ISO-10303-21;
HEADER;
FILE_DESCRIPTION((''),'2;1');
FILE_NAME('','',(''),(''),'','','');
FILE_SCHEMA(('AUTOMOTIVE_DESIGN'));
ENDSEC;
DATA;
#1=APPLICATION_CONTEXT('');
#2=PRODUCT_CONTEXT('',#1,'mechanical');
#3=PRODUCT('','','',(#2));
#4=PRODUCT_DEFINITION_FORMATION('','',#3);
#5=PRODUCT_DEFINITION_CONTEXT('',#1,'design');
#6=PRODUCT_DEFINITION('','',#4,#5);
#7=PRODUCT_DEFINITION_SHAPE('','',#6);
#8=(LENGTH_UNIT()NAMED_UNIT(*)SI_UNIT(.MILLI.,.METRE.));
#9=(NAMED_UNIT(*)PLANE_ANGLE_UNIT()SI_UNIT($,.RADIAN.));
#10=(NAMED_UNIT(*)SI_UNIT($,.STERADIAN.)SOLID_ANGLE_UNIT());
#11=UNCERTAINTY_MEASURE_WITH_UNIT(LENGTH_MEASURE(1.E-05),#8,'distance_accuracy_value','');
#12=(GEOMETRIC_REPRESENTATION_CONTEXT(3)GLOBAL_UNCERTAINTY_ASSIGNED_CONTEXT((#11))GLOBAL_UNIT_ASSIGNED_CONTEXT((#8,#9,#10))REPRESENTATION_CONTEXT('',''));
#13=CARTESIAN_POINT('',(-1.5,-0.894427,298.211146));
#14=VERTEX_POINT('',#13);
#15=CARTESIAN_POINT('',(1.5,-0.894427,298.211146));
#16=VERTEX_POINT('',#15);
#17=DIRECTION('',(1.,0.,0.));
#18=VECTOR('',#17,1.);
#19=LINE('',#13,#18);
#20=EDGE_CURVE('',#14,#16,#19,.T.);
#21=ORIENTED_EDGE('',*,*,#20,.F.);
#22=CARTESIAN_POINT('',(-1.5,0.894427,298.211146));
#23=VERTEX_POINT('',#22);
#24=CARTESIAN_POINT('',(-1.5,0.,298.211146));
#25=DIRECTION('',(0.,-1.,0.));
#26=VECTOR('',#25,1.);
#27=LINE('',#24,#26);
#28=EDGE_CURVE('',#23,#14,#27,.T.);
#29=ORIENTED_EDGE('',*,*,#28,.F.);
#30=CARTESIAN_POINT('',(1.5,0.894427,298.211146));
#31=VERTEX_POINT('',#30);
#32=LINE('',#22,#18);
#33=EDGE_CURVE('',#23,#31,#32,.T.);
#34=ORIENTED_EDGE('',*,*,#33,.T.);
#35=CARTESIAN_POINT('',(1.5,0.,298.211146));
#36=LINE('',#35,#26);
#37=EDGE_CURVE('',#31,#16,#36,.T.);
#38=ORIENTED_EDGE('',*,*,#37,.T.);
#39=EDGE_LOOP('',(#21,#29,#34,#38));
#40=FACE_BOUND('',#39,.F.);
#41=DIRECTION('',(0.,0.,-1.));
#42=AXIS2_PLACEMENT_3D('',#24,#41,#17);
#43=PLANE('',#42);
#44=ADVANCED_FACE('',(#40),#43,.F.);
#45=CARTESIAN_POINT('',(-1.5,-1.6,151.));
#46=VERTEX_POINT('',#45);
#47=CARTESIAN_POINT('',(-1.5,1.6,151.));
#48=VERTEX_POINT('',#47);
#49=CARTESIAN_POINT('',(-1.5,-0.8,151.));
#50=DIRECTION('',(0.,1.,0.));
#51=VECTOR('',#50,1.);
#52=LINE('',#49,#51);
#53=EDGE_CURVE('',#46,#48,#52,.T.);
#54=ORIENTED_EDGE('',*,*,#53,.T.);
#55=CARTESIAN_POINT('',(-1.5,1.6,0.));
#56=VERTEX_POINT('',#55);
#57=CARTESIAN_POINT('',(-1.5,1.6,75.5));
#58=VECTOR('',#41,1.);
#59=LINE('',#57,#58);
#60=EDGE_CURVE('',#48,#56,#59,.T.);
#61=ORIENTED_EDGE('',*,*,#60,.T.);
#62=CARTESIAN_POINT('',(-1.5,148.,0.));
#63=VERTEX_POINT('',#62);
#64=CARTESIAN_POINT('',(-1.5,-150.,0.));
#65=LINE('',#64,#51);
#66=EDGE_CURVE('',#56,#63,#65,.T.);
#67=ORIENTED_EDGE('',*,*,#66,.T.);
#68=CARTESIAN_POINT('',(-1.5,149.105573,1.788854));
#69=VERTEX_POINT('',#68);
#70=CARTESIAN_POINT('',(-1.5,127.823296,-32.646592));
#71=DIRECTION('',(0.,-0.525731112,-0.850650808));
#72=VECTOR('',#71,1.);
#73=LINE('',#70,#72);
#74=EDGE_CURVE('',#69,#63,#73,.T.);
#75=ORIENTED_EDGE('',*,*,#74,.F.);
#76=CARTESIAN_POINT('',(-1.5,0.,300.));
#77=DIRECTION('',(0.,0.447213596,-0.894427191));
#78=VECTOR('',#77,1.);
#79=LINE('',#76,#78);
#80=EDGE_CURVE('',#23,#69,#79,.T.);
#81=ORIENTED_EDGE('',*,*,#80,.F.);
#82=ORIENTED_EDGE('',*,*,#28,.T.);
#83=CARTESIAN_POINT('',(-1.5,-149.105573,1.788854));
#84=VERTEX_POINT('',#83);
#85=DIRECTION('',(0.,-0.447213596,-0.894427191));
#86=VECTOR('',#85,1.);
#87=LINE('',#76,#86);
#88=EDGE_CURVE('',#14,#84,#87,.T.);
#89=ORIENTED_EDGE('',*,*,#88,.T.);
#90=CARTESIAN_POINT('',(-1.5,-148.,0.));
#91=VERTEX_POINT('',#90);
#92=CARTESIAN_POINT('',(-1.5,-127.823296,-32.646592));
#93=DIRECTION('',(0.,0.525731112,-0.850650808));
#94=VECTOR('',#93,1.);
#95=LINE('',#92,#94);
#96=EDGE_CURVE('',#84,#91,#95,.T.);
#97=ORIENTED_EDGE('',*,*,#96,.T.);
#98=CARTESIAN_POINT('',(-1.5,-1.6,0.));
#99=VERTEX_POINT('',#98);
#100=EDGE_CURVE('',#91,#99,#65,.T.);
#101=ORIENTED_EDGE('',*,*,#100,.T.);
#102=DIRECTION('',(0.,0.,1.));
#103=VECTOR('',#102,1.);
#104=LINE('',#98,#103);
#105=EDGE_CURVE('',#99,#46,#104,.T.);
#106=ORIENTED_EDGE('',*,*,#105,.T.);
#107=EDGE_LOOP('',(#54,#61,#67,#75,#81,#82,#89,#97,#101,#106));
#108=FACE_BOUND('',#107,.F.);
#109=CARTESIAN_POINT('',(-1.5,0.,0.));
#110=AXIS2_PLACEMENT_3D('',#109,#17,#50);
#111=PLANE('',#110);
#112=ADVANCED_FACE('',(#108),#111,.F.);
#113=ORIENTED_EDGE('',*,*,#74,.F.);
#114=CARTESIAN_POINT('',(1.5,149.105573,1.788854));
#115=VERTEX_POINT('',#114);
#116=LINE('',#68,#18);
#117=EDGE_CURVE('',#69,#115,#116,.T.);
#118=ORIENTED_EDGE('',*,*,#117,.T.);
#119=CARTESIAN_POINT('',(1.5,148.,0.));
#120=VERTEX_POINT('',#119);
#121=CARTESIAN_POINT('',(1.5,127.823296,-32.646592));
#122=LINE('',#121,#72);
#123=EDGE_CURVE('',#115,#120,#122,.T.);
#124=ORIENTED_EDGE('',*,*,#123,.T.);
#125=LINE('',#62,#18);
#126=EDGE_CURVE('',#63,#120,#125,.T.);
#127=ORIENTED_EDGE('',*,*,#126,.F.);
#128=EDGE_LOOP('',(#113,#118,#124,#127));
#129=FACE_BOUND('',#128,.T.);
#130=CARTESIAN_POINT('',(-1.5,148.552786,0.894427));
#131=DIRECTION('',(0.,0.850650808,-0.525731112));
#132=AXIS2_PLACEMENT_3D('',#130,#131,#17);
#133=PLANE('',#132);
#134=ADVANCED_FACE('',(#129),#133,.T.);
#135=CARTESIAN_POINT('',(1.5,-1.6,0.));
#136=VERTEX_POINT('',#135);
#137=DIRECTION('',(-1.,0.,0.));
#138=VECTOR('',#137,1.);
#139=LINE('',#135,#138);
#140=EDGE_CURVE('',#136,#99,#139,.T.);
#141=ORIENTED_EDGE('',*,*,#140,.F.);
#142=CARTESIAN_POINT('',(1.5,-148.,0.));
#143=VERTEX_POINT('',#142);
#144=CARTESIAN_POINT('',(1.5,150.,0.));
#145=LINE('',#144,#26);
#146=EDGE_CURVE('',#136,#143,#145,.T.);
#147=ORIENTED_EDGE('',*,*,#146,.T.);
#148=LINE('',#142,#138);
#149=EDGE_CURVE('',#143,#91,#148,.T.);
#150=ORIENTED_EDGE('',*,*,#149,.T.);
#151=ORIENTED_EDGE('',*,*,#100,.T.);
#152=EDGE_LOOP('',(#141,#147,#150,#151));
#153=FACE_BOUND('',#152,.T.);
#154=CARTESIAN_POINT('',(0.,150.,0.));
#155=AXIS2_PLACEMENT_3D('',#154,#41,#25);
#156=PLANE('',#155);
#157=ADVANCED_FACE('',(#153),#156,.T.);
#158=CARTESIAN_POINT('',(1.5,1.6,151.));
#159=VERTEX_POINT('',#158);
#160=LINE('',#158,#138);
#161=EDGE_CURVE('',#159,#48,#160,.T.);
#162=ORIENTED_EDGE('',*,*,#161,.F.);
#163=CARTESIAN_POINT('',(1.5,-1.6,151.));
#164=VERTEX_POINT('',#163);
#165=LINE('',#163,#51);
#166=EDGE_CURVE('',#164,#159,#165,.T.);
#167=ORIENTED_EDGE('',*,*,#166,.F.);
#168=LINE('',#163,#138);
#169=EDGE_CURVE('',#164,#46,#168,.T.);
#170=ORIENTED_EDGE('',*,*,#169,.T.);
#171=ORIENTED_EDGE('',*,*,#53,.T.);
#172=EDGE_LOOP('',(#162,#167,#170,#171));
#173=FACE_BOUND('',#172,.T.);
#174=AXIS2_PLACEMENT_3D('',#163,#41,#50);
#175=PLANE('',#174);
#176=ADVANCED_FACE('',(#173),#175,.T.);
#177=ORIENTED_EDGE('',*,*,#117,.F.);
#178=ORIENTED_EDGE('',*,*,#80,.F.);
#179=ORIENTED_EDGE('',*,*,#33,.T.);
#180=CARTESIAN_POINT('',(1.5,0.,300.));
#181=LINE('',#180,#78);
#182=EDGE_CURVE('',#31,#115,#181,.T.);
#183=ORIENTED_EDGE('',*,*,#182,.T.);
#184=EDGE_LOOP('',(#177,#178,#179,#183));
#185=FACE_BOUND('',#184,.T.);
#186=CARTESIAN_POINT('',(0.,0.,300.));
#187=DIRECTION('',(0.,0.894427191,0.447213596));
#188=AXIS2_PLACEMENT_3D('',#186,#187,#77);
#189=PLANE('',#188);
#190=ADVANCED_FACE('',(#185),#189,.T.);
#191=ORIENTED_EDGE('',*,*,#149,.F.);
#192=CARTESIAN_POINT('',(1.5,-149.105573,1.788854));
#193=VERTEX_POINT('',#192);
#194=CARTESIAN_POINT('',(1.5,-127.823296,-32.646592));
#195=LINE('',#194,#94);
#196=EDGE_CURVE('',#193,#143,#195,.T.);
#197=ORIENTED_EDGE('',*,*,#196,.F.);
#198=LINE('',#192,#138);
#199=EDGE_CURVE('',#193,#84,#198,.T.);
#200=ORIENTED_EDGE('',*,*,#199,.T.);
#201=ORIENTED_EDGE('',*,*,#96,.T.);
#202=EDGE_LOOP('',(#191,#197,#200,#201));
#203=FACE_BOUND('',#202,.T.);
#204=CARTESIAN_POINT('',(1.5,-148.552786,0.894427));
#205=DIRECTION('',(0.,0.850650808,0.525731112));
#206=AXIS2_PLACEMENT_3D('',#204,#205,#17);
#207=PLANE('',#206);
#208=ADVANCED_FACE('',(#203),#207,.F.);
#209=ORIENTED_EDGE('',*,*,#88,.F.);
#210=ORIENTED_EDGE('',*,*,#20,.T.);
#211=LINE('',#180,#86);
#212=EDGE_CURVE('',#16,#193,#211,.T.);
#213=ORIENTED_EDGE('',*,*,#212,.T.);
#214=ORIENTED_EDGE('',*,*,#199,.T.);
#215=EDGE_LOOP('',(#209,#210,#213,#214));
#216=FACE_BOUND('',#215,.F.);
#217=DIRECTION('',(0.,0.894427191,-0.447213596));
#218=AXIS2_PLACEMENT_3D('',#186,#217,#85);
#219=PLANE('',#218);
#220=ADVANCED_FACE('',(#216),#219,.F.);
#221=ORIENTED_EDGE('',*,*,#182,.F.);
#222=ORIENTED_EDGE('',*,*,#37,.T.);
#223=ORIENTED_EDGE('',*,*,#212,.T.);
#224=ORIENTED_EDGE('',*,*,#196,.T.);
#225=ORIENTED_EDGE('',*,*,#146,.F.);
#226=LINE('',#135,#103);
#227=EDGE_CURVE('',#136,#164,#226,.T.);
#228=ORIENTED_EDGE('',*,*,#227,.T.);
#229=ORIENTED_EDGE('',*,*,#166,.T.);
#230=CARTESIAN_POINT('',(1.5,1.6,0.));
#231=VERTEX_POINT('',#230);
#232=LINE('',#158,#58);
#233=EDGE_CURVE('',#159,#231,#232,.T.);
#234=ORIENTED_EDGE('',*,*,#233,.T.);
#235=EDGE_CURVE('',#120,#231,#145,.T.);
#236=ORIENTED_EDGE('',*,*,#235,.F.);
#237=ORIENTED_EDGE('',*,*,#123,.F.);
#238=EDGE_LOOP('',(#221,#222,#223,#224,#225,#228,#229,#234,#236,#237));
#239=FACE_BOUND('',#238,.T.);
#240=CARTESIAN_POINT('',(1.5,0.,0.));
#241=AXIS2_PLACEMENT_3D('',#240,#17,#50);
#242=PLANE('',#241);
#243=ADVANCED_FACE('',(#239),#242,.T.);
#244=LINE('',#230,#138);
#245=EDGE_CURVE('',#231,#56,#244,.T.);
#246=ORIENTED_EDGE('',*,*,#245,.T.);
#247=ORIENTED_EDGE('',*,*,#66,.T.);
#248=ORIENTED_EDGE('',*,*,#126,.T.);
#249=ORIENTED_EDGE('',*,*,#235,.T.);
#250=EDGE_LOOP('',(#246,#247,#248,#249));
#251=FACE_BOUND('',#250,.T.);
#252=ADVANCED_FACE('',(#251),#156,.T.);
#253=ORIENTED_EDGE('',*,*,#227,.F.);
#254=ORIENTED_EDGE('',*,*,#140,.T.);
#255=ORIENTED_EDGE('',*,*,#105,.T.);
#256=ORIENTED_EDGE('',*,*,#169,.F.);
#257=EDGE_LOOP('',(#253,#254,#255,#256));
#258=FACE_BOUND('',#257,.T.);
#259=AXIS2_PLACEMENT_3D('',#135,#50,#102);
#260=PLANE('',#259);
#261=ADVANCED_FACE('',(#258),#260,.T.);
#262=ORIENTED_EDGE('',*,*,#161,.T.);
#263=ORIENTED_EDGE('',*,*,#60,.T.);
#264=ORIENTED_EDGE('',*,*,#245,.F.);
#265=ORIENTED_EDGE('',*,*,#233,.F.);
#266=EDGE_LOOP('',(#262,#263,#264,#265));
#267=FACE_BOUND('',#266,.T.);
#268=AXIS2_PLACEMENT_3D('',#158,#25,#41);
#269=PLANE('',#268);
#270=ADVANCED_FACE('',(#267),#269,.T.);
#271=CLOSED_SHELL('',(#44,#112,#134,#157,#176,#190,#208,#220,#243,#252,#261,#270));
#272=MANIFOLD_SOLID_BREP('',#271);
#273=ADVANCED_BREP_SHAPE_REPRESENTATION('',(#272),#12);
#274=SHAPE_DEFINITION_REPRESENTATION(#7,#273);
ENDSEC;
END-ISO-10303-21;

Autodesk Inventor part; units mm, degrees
ref_plane "YZ Plane" through (0, 0, 0) normal (1, 0, 0) x (0, 1, 0)
ref_plane "XZ Plane" through (0, 0, 0) normal (0, 1, 0) x (-1, 0, 0)
ref_plane "XY Plane" through (0, 0, 0) normal (0, 0, 1) x (1, 0, 0)
sketch "Sketch1" plane through (0, 0, 0) normal (1, 0, 0) x (0, 1, 0)
  line L0 (150, 0) -> (-150, 0)
  line L1 (0, 0) -> (0, 300)
  line L2 (0, 300) -> (150, 0)
  line L3 (0, 300) -> (-150, 0)
  dimension "d0" = 300
  dimension "d1" = 300
extrude "Plate1" add sketch "Sketch1" along normal mid plane 3
sketch "Sketch3" plane through (1.5, 0, 0) normal (1, 0, 0) x (0, 0, -1)
  line L0 (0, -1.6) -> (-151, -1.6)
  line L1 (-151, -1.6) -> (-151, 1.6)
  line L2 (-151, 1.6) -> (0, 1.6)
  line L3 (0, 1.6) -> (0, -1.6)
  line L4 (0, 150) -> (0, -150) projected
  point P0 (0, 0)
  point P1 (0, 0)
  dimension "d7" = 3.2
  dimension "d8" = 151
extrude "Extrusion2" cut sketch "Sketch3" against normal through all
chamfer "Corner Chamfer1" distance 2 angle 45 1 edges at (0, 0, 300)
chamfer "Corner Chamfer2" distance 2 angle 45 2 edges at (0, -150, 0) (0, 150, 0)
equation "\"d2\" = Thickness"
equation "\"BendReliefWidth\" = Thickness"
equation "\"BendReliefDepth\" = 0.5 * Thickness"
equation "\"CornerReliefSize\" = 4 * Thickness"
equation "\"MinimumRemnant\" = 2 * Thickness"
equation "\"TransitionRadius\" = BendRadius"
equation "\"JacobiRadiusSize\" = BendRadius"
equation "\"GapSize\" = Thickness"
equation "\"Thickness\" = 3"
equation "\"BendRadius\" = 5"
properties part number "MSC 207 CONE BLADE" material "Stainless Steel"
